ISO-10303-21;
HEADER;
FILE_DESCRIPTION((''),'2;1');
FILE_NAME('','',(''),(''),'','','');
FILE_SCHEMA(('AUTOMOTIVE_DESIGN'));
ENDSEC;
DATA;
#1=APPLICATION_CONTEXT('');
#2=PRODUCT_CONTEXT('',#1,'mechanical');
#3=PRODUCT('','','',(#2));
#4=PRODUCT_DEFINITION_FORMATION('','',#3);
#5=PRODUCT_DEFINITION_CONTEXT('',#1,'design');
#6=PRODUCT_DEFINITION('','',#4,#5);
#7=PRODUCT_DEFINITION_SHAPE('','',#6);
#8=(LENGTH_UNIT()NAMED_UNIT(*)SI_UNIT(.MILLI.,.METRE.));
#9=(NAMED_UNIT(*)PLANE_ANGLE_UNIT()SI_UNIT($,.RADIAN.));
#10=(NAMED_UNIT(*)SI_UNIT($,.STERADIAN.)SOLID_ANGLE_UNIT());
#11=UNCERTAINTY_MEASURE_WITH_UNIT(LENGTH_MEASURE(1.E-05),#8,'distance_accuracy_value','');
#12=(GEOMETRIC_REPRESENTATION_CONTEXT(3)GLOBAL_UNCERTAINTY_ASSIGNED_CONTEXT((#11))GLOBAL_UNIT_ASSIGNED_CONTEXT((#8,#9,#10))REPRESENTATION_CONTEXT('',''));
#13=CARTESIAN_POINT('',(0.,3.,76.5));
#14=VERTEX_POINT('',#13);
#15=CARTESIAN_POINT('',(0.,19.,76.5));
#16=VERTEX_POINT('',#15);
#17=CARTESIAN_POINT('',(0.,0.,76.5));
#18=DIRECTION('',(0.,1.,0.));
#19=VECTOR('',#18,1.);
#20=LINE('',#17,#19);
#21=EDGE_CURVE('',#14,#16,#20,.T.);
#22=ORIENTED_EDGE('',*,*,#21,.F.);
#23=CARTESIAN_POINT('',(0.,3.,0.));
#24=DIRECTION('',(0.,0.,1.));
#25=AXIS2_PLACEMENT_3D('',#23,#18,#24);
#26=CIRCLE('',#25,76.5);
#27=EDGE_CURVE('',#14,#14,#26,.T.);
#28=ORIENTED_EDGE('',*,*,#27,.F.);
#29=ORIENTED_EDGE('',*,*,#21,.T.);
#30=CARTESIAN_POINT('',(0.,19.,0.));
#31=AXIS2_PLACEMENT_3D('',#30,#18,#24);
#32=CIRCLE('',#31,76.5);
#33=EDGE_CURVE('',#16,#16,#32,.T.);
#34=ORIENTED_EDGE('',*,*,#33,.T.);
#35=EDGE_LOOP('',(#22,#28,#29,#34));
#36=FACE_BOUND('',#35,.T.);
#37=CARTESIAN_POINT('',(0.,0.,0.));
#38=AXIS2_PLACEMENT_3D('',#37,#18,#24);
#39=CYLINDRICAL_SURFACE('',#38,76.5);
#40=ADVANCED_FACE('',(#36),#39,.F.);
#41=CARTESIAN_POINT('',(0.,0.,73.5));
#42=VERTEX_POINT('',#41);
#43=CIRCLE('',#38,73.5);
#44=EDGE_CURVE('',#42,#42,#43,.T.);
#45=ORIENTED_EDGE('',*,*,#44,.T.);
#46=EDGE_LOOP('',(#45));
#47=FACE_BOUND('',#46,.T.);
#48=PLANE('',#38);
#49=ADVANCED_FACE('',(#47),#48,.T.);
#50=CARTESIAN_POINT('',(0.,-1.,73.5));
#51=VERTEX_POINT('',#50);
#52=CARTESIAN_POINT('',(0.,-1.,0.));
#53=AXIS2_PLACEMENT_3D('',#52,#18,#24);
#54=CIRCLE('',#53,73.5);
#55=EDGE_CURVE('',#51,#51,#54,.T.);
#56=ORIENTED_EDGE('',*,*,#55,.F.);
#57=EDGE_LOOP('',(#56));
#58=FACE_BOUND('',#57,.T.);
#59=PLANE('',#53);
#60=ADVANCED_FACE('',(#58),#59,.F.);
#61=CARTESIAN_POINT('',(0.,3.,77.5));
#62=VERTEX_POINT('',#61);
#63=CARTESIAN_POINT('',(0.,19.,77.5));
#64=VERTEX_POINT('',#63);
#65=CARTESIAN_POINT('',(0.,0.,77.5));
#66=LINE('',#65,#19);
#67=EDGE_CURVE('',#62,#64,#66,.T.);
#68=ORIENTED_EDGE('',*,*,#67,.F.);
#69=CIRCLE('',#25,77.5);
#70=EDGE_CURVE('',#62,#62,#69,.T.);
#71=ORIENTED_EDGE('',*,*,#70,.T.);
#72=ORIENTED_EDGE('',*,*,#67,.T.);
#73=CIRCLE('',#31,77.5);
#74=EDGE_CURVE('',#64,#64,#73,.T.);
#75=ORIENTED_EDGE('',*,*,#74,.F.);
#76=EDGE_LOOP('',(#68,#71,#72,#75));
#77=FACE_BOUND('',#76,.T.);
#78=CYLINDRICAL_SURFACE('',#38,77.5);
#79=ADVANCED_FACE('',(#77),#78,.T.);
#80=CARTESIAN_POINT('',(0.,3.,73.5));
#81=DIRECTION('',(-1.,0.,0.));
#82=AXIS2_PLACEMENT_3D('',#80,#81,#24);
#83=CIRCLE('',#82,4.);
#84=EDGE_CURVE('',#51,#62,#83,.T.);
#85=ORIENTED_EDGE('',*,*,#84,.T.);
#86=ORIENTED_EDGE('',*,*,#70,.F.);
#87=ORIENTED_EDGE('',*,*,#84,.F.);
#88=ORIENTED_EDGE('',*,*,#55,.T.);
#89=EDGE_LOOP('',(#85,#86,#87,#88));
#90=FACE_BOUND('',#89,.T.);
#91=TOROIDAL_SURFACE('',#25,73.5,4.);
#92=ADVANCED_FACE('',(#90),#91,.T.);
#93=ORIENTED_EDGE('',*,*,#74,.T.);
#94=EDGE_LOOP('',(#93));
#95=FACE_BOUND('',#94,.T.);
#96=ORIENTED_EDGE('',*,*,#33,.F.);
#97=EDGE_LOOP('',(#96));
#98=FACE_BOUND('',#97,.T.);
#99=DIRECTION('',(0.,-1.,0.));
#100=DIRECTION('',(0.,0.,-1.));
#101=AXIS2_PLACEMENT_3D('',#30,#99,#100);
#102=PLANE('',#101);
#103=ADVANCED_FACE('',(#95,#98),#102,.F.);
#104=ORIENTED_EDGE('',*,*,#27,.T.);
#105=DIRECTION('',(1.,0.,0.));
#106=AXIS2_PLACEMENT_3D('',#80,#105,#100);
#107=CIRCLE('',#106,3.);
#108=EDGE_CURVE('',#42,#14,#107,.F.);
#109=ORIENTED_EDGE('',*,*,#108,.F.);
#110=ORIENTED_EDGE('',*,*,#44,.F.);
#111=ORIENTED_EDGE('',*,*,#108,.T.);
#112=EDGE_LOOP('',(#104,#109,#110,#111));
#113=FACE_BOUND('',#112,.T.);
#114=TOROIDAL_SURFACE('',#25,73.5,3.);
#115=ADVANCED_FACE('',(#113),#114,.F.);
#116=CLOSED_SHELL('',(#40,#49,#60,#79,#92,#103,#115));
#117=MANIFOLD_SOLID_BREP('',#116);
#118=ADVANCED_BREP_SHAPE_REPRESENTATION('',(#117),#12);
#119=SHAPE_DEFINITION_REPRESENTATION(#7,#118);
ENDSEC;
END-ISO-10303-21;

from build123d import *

# Parameters (mm, degrees)
SKETCH1_R          = 72.5
BASE_FLANGE1_DEPTH = 1


# Read off the part's stored shape, not the designer's step: Edge-Flange1
# Sheet-metal steps are written as plain solids
with BuildPart() as part:
    # Sketch1 → Base-Flange1 (new body)
    with BuildSketch(Plane(origin=(0, 0, 0), x_dir=(1, 0, 0), z_dir=(0, 1, 0))):
        with Locations(Location((0, 0, 0), (0, 0, 270))):
            Circle(SKETCH1_R)
    extrude(amount=-BASE_FLANGE1_DEPTH)

    # Edge-Flange1 outline → Edge-Flange1 (revolve)
    with BuildSketch(Plane.XY):
        with BuildLine():
            Line((77.5, 19), (76.5, 19))
            Line((76.5, 19), (76.5, 3))
            ThreePointArc((76.5, 3), (75.621320344, 0.878679656), (73.5, 0))
            Line((73.5, 0), (72.5, 0))
            Line((72.5, 0), (72.5, -1))
            Line((72.5, -1), (73.5, -1))
            ThreePointArc((73.5, -1), (76.328427125, 0.171572875), (77.5, 3))
            Line((77.5, 3), (77.5, 19))
        make_face()
    revolve(axis=Axis((0, 0, 0), (0, 1, 0)))


solid = part.part
